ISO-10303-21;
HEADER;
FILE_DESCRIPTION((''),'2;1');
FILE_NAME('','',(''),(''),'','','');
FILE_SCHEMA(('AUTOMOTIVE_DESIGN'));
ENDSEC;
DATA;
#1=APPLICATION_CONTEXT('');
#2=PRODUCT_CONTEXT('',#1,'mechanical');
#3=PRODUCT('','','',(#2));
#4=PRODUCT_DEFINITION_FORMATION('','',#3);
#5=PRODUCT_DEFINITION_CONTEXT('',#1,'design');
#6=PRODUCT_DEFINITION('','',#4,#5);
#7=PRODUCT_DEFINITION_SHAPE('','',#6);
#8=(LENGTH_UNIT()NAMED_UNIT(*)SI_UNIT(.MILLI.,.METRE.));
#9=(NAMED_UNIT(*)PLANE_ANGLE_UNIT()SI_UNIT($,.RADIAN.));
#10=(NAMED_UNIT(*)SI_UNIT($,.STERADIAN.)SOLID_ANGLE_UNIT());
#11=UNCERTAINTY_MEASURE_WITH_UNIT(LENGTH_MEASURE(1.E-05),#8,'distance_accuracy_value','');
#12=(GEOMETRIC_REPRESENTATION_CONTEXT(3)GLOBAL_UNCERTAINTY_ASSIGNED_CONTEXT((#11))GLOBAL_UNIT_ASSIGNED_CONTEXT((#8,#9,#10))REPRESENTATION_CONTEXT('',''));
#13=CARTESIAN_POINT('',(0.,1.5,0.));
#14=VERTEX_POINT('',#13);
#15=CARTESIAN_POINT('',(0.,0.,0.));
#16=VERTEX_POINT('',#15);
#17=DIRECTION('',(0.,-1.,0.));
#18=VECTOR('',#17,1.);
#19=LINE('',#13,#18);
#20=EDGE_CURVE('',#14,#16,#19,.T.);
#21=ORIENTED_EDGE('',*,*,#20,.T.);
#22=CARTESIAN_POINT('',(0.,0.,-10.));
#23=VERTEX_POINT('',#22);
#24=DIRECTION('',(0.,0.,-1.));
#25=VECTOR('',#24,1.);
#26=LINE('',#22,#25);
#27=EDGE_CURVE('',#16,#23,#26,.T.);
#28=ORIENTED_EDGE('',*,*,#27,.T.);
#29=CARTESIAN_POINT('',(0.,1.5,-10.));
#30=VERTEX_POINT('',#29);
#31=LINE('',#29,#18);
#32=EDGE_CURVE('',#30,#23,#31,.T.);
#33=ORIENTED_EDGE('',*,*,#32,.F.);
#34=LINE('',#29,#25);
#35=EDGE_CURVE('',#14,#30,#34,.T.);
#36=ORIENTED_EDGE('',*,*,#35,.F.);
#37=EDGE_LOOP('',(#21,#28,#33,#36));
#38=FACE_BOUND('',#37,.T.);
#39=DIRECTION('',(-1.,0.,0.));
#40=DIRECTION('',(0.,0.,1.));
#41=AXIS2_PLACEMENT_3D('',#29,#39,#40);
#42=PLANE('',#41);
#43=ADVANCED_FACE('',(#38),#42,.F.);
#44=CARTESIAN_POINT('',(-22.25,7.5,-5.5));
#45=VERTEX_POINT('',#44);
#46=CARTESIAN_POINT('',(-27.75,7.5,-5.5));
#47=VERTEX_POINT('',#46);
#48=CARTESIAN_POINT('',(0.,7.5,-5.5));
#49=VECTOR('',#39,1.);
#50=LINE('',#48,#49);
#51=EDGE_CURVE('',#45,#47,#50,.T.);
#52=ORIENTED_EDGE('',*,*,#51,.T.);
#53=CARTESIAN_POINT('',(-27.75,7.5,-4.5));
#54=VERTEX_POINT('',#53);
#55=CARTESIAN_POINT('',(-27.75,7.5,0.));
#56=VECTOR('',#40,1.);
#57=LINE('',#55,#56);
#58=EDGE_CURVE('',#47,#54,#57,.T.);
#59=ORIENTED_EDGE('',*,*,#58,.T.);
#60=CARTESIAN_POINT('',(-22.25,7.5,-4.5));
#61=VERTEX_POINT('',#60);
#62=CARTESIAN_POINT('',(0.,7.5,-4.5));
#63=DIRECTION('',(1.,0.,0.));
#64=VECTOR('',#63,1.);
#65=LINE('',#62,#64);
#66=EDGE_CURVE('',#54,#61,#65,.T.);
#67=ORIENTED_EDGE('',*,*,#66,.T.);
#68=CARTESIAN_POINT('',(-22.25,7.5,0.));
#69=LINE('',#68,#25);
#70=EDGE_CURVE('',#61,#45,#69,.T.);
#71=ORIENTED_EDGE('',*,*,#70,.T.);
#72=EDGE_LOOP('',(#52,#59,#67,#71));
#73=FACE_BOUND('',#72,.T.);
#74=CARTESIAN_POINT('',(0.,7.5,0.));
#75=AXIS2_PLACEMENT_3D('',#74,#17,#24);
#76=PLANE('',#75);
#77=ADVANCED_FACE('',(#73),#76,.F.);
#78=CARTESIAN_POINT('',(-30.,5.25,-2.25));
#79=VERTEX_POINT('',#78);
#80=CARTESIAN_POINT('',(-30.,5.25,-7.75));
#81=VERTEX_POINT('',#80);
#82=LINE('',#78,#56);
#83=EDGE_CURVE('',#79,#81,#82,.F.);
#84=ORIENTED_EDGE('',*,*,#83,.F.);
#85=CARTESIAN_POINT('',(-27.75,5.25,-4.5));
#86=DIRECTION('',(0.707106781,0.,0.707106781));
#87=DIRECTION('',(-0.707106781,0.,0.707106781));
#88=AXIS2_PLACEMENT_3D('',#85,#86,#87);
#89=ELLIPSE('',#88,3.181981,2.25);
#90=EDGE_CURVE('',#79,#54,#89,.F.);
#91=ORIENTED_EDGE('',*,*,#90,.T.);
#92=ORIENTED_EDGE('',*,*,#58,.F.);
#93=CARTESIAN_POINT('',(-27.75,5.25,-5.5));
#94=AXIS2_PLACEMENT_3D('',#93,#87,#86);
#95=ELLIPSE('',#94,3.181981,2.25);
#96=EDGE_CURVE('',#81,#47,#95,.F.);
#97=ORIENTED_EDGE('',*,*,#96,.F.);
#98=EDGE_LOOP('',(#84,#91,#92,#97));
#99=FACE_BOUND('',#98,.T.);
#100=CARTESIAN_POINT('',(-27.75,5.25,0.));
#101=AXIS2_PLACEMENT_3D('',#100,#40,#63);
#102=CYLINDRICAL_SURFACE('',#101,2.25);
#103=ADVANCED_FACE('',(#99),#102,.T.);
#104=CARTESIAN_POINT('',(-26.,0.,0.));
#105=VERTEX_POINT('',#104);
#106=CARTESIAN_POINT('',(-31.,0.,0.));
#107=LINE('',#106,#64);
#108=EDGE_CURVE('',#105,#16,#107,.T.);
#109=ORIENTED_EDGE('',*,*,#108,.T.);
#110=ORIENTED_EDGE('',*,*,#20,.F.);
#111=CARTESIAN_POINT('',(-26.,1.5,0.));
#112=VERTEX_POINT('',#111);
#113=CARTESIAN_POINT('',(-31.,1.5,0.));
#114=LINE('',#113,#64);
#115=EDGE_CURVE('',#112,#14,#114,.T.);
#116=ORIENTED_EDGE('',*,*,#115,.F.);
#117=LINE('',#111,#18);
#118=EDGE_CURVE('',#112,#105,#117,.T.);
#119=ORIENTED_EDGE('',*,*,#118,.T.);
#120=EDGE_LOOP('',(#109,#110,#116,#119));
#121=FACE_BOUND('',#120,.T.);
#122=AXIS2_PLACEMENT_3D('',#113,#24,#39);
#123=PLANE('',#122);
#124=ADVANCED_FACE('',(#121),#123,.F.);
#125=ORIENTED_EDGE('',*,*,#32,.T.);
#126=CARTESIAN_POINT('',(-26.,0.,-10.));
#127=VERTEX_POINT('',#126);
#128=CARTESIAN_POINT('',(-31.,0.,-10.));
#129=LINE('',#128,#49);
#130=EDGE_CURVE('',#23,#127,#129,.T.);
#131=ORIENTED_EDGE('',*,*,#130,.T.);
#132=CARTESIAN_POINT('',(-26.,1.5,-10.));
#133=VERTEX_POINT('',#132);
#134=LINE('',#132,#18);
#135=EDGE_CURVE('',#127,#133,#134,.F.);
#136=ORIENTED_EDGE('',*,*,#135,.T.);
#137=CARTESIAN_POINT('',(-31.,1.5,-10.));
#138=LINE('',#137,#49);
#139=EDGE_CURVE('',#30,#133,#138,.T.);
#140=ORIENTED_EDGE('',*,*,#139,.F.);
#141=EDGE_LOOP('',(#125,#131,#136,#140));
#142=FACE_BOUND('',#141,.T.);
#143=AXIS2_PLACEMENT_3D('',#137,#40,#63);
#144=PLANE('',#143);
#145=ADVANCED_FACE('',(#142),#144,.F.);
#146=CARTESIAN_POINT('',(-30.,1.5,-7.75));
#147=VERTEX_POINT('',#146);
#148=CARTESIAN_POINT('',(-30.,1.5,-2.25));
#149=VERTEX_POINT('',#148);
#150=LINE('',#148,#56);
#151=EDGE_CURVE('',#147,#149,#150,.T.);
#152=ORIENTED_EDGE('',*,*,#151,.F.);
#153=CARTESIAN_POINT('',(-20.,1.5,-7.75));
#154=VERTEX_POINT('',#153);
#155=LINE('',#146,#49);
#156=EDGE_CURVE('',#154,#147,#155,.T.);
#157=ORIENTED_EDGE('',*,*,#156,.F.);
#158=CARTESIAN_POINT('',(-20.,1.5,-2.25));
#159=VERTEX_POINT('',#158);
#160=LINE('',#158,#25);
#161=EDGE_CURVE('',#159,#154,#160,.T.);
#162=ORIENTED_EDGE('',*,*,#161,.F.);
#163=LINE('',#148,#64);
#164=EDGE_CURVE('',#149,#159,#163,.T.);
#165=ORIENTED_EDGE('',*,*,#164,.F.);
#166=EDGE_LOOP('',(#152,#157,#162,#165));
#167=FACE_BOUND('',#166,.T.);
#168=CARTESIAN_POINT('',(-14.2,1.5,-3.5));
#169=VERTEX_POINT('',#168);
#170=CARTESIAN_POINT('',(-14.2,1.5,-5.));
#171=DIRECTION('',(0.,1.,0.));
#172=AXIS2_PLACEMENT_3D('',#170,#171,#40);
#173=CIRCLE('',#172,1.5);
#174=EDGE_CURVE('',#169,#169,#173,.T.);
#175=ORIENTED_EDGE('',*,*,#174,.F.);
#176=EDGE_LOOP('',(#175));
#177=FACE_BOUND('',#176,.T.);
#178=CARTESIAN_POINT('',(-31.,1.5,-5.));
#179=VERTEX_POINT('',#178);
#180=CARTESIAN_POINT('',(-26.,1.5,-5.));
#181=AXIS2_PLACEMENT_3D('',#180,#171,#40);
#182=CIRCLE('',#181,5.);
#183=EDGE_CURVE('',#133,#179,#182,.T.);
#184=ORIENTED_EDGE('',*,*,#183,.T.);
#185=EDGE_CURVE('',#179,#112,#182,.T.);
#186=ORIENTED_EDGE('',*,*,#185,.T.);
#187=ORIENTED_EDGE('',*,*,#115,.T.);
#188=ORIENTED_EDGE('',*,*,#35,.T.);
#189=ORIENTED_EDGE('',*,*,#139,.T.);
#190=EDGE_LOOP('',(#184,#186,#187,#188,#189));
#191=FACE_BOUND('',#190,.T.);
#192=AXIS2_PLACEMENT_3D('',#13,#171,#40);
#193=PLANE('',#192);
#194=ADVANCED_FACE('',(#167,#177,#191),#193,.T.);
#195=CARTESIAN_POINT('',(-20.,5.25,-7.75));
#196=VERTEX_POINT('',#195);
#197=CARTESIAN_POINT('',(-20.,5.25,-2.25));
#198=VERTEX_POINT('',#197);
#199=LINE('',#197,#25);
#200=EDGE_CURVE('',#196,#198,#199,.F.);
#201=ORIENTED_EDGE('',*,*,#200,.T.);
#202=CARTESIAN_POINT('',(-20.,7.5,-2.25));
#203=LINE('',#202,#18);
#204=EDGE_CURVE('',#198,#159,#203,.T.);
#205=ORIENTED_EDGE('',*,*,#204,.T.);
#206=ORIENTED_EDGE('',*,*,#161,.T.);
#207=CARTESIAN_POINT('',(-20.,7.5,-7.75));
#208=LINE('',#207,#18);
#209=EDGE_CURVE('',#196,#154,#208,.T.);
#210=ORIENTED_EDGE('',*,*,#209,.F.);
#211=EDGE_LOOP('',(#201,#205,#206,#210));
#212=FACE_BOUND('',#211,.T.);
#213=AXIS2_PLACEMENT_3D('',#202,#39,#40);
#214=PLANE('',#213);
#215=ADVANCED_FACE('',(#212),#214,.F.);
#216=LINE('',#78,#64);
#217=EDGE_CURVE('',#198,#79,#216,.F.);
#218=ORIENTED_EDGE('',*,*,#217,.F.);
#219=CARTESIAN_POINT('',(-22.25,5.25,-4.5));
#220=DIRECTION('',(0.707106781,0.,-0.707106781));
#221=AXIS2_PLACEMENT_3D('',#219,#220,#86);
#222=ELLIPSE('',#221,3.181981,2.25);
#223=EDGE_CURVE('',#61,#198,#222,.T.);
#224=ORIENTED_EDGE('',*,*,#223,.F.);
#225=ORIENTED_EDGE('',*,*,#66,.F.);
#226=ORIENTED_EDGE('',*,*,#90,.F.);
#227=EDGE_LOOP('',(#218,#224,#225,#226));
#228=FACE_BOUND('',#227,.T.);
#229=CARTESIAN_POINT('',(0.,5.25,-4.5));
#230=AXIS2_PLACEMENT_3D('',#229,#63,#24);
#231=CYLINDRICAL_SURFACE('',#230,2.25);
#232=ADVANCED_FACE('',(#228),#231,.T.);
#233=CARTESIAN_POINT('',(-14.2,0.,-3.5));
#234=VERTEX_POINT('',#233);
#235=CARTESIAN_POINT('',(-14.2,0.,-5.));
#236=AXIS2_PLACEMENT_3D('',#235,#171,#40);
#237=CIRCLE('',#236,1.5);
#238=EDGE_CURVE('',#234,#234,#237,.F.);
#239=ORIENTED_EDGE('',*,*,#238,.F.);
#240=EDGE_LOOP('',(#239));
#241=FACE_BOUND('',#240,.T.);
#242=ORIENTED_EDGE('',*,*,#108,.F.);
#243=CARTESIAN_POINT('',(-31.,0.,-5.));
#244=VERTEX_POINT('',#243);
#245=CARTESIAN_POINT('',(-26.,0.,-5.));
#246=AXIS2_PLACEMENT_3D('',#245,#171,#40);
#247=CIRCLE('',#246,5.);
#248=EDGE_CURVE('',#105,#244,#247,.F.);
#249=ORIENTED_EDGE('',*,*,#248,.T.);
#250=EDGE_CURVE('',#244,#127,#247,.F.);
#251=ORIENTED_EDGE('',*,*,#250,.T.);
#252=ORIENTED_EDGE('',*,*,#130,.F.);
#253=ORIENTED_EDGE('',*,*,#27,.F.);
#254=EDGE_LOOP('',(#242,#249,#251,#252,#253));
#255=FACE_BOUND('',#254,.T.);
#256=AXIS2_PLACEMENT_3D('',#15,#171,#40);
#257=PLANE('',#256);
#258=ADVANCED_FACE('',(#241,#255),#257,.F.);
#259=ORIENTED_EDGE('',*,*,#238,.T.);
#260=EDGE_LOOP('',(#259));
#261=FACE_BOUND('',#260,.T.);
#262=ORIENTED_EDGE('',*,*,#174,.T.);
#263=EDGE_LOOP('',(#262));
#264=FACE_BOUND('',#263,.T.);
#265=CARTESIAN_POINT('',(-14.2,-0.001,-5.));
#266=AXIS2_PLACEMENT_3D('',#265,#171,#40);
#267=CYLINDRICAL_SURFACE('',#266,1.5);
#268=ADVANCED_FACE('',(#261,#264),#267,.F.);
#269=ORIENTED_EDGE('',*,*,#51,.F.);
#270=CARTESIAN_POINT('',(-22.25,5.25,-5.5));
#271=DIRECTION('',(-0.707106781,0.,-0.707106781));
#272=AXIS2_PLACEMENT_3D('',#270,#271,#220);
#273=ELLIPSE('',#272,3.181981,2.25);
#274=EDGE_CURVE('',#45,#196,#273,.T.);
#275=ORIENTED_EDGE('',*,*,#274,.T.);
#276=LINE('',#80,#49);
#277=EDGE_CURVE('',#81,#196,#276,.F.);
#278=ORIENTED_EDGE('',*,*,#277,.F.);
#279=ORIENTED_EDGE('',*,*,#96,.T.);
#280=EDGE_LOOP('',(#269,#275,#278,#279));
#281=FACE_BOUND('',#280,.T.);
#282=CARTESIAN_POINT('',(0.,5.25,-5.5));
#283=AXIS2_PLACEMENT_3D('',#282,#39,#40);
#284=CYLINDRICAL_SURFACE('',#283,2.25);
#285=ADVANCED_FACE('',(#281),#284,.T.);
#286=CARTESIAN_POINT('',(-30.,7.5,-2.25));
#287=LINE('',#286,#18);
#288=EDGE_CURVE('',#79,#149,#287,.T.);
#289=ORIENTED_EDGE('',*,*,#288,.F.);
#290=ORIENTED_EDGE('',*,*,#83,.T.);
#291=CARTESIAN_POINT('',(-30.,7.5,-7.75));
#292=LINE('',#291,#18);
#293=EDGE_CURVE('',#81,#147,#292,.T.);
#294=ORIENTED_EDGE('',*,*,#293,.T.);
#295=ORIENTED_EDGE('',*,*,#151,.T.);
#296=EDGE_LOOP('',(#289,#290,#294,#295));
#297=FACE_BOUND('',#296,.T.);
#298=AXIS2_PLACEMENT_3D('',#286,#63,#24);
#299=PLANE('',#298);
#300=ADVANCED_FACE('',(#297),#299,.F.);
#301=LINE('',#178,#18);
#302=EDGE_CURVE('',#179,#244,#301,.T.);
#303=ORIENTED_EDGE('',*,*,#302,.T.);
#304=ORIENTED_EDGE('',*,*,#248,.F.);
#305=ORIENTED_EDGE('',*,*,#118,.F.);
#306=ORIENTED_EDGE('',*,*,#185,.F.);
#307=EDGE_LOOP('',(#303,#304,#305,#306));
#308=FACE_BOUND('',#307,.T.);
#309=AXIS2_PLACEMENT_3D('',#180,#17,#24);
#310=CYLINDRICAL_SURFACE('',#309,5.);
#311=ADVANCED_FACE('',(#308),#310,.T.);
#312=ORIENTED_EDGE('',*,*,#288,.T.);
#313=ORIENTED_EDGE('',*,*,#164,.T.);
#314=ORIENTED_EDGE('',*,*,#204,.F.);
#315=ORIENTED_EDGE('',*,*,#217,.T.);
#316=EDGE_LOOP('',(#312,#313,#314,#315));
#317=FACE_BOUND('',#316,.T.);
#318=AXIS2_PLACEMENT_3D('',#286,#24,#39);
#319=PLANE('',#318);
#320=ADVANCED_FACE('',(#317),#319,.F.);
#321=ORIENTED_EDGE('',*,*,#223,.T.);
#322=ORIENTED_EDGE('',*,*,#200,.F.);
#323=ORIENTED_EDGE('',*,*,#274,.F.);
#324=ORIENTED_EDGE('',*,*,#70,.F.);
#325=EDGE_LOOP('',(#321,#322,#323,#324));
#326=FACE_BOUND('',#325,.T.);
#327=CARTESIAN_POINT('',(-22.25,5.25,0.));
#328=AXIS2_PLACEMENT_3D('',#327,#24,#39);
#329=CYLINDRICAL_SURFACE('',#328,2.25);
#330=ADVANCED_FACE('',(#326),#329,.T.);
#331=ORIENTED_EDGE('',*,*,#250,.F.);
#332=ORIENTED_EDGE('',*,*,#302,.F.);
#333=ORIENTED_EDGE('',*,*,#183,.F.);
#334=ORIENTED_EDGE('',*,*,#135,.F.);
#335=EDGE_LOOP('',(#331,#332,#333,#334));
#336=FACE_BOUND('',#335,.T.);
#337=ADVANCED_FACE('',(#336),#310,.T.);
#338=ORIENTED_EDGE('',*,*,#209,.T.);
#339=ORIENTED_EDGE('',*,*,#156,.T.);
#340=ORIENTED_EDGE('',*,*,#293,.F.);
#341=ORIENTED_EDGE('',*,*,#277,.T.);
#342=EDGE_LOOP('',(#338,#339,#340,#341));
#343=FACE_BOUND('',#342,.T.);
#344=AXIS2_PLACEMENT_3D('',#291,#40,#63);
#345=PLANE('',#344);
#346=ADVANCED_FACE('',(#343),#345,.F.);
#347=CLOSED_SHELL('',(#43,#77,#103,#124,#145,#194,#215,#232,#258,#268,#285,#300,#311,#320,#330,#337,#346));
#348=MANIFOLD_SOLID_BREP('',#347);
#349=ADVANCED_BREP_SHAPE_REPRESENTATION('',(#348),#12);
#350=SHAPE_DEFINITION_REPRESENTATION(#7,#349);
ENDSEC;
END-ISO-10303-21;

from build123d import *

# Parameters (mm, degrees)
SKETCH1_W           = 31
SKETCH1_H           = 10
BOSS_EXTRUDE1_DEPTH = 1.5
CUT_EXTRUDE1_REACH  = 34.608
SKETCH2_R           = 1.5
SKETCH3_W           = 10
SKETCH3_H           = 5.5
BOSS_EXTRUDE2_DEPTH = 6
FILLET3_R           = 2.25
FILLET4_R           = 5


with BuildPart() as part:
    # Sketch1 → Boss-Extrude1 (new body)
    with BuildSketch(Plane(origin=(0, 0, 0), x_dir=(1, 0, 0), z_dir=(0, 1, 0))):
        with Locations((-15.5, 5)):
            Rectangle(SKETCH1_W, SKETCH1_H)
    extrude(amount=BOSS_EXTRUDE1_DEPTH)

    # Sketch2 → Cut-Extrude1 (cut, up to next)
    with BuildSketch(Plane(origin=(0, 1.5, 0), x_dir=(1, 0, 0), z_dir=(0, 1, 0)), mode=Mode.PRIVATE) as cut_extrude1_sk1:
        with Locations(Location((-14.2, 5, 0), (0, 0, 270))):
            Circle(SKETCH2_R)
    cut_extrude1_tool1 = extrude(cut_extrude1_sk1.sketch, amount=-CUT_EXTRUDE1_REACH, mode=Mode.PRIVATE) & part.part
    add(cut_extrude1_tool1.solids().sort_by_distance((-14.2, 1.5, -5))[0], mode=Mode.SUBTRACT)

    # Sketch3 → Boss-Extrude2 (add)
    with BuildSketch(Plane(origin=(0, 1.5, 0), x_dir=(1, 0, 0), z_dir=(0, 1, 0))):
        with Locations((-25, 5)):
            Rectangle(SKETCH3_W, SKETCH3_H)
    extrude(amount=BOSS_EXTRUDE2_DEPTH)

    # Fillet3
    fillet3_edges = [part.edges().sort_by_distance(p)[0] for p in [
        (-30, 7.5, -5),
        (-25, 7.5, -2.25),
        (-20, 7.5, -5),
        (-25, 7.5, -7.75),
    ]]
    fillet(fillet3_edges, radius=FILLET3_R)

    # Fillet4
    fillet4_edges = [part.edges().sort_by_distance(p)[0] for p in [
        (-31, 0.75, 0),
        (-31, 0.75, -10),
    ]]
    fillet(fillet4_edges, radius=FILLET4_R - 0.0001)  # a hair under: the kernel refuses the full size


solid = part.part
